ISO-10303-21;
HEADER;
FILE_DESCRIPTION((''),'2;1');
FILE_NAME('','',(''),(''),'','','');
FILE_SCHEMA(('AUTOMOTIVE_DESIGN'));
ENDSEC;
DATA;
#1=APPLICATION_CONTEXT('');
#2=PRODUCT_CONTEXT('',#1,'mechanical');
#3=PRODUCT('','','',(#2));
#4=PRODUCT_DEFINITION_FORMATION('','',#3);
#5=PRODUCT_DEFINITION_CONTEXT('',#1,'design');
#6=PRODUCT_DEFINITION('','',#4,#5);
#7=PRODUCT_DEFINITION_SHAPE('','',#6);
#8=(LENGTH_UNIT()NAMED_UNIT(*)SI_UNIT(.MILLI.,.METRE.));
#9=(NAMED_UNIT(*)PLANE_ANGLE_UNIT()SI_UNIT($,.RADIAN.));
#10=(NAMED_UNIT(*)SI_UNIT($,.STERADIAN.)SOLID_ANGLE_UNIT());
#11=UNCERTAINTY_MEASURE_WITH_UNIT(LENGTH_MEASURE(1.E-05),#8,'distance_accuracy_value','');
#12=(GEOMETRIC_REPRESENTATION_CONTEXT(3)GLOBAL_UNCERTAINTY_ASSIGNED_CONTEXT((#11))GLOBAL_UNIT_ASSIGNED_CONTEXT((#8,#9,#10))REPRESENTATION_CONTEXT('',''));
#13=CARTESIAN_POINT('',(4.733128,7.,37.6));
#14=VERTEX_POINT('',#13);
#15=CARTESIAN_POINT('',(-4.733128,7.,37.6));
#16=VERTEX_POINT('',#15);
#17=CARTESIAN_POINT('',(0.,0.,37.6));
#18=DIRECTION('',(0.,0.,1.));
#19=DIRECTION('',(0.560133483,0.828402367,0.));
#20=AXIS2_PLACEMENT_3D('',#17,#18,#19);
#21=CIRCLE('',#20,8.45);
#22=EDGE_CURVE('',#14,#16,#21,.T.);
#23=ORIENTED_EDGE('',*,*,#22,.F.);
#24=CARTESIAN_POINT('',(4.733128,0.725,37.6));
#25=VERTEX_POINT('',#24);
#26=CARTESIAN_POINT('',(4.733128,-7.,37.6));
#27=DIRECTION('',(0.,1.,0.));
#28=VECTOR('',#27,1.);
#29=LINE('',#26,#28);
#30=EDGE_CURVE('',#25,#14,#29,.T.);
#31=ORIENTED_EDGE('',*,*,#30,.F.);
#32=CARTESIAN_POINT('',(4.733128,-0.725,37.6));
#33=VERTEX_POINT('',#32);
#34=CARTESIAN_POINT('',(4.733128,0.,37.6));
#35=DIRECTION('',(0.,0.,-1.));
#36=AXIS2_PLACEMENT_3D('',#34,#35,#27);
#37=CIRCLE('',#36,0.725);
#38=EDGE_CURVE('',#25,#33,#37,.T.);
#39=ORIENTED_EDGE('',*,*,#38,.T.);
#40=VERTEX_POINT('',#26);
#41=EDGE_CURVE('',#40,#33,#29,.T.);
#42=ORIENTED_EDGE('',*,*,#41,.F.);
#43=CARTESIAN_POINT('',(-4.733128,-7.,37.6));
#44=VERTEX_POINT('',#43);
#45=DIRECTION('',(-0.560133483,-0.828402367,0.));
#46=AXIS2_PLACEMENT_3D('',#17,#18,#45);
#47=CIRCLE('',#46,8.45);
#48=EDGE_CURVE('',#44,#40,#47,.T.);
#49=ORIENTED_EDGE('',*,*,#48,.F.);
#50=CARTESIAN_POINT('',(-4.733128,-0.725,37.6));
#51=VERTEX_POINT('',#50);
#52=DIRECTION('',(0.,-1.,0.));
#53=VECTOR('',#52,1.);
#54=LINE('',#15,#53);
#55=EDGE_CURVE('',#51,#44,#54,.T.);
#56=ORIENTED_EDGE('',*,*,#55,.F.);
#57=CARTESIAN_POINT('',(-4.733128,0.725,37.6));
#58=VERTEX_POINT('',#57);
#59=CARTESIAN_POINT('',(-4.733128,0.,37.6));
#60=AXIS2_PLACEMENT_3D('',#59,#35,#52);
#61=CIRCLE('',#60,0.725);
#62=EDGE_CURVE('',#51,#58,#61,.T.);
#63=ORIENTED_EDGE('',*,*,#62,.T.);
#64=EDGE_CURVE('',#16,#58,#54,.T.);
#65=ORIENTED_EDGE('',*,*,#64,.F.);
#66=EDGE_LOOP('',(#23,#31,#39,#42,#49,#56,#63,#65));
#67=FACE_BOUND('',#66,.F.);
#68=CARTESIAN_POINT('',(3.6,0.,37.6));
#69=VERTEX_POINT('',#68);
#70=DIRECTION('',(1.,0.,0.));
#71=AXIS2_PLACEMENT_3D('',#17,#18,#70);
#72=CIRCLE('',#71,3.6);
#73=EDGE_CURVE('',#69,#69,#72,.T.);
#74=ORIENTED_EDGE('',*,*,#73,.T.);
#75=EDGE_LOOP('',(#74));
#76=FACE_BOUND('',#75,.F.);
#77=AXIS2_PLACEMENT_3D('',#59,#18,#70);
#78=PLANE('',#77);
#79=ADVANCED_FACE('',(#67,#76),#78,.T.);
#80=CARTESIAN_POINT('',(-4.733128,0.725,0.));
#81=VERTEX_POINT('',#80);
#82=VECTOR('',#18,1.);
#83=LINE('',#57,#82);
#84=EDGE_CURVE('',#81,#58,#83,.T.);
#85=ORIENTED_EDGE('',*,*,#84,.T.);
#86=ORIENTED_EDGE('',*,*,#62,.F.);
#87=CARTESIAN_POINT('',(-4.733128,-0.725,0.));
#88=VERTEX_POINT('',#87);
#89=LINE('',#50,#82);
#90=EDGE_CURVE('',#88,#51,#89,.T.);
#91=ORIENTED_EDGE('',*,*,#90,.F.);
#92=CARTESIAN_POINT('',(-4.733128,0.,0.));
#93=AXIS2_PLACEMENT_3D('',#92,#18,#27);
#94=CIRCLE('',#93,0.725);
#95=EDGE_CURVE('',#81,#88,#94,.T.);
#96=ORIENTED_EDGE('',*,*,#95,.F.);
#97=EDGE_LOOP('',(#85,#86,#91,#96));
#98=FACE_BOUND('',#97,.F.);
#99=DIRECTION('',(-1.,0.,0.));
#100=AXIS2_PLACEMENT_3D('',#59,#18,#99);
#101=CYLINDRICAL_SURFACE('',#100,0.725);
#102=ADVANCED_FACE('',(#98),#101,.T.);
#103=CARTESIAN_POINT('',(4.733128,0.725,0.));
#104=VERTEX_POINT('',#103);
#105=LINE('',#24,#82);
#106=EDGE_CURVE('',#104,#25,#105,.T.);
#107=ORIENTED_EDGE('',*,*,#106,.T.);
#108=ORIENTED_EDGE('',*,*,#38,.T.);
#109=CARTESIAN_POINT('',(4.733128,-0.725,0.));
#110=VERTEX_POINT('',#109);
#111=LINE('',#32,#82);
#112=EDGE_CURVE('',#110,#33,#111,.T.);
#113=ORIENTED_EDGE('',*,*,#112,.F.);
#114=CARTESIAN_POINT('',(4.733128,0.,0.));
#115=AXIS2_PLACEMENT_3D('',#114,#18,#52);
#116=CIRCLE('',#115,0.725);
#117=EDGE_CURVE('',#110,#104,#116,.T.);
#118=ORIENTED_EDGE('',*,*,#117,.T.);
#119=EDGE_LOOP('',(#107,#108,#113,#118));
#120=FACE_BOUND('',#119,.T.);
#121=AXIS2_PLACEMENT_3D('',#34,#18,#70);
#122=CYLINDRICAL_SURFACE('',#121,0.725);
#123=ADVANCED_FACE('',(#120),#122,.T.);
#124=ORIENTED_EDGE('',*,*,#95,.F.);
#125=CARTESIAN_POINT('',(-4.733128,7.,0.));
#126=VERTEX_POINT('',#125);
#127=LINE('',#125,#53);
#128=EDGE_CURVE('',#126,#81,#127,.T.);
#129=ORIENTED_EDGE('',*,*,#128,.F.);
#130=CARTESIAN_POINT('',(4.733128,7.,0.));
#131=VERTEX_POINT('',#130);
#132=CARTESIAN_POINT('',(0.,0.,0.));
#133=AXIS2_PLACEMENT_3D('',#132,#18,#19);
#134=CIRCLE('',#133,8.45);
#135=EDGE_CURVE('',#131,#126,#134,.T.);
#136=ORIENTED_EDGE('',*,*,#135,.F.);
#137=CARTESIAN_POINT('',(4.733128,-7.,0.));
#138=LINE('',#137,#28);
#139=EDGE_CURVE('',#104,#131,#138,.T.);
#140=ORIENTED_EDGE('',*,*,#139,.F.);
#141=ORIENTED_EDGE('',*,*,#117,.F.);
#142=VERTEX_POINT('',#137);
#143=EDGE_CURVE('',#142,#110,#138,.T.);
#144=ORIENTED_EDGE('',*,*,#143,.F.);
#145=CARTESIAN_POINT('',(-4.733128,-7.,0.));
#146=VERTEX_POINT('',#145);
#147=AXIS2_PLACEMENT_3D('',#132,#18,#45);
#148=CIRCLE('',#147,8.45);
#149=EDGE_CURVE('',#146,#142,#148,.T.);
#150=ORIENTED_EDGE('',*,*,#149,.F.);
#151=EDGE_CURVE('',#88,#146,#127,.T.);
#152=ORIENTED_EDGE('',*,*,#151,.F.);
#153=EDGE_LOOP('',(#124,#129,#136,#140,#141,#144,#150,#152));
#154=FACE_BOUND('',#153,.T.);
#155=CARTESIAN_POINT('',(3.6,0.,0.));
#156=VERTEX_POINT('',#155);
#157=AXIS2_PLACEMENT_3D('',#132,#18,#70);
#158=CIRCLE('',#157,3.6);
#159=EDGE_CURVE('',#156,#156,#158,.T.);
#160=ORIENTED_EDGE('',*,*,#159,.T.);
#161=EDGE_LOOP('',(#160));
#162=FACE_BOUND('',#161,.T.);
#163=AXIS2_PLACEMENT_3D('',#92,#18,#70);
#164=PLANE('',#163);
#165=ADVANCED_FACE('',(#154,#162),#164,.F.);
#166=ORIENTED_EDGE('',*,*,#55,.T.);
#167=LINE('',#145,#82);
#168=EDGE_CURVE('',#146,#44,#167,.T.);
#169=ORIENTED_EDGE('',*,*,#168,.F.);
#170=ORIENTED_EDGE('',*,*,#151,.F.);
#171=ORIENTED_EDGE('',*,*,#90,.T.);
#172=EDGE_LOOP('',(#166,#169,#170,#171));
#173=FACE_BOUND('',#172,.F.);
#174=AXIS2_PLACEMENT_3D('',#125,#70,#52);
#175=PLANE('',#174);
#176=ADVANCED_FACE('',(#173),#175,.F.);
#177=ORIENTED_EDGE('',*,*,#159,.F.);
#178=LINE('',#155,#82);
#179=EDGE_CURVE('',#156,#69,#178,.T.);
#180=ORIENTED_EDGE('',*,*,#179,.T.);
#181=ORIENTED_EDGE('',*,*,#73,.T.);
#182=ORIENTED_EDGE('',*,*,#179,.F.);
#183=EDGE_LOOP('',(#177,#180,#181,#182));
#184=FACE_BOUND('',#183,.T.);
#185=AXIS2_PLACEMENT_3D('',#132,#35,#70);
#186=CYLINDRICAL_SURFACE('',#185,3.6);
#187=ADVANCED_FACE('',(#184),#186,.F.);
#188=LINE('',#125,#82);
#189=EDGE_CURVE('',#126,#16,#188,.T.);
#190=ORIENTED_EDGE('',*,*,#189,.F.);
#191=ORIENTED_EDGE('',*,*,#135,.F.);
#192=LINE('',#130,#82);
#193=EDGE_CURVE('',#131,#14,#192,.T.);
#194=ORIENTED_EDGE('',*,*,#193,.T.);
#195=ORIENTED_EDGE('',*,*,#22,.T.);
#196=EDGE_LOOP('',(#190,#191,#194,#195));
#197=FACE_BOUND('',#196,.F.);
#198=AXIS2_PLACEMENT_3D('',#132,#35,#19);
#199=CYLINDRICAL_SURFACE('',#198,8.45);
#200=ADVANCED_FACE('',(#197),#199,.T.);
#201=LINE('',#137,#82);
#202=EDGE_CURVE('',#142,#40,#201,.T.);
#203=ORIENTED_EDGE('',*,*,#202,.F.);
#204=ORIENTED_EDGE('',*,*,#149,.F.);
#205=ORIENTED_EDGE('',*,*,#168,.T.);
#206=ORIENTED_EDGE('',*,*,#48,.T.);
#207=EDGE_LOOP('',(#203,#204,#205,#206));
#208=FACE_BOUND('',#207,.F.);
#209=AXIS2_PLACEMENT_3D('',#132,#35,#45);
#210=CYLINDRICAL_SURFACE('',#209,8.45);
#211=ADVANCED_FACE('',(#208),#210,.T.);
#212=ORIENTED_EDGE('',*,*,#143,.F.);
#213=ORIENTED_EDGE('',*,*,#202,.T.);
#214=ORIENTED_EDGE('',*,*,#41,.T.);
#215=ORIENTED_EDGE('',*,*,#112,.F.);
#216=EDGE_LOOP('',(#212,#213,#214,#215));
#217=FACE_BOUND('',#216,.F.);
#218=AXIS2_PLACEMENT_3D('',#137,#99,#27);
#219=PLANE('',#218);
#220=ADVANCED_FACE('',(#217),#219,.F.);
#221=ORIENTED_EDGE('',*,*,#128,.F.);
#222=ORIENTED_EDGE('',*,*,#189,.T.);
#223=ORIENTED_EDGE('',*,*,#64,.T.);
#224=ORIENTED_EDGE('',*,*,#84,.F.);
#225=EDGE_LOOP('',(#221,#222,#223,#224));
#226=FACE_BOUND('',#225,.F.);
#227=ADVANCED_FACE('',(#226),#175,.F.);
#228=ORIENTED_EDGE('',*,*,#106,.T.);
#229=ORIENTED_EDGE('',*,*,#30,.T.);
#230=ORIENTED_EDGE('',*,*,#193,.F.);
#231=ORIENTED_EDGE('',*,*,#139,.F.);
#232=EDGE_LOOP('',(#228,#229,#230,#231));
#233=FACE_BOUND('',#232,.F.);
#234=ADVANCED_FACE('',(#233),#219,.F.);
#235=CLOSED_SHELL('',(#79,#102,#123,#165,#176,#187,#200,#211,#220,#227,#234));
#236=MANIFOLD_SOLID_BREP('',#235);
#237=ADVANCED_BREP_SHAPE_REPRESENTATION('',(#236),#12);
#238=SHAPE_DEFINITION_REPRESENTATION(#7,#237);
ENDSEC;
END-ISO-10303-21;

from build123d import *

# Parameters (mm, degrees)
F0_R     = 3.6
F1_DEPTH = 37.6
F2_R     = 0.725
F3_DEPTH = 37.6


# Not quite as in the source:
# - a pattern or mirror of a feature is missing from the dataset's text; its kind, count and spacing are read off the source's solid


with BuildPart() as f1:
    # F0 (on Top) → F1 (new body)
    with BuildSketch(Plane.XY):
        with BuildLine():
            Line((4.7331279298, -7), (4.7331279298, 7))
            ThreePointArc((4.7331279298, 7), (0, 8.45), (-4.7331279298, 7))
            Line((-4.7331279298, 7), (-4.7331279298, -7))
            ThreePointArc((-4.7331279298, -7), (0, -8.45), (4.7331279298, -7))
        make_face()
        Circle(F0_R, mode=Mode.SUBTRACT)
    extrude(amount=F1_DEPTH)

    # F2 (on face) → F3 (join)
    with BuildSketch(Plane.XY.offset(37.6)):
        with Locations((4.7331279298, 0)):
            Circle(F2_R)
    f3 = extrude(amount=-F3_DEPTH)

    # F3_copies: F3 across plane
    add(f3.mirror(Plane(origin=(0, 0, 0), x_dir=(0, 0, -1), z_dir=(-1, 0, 0))))


solid = f1.part
